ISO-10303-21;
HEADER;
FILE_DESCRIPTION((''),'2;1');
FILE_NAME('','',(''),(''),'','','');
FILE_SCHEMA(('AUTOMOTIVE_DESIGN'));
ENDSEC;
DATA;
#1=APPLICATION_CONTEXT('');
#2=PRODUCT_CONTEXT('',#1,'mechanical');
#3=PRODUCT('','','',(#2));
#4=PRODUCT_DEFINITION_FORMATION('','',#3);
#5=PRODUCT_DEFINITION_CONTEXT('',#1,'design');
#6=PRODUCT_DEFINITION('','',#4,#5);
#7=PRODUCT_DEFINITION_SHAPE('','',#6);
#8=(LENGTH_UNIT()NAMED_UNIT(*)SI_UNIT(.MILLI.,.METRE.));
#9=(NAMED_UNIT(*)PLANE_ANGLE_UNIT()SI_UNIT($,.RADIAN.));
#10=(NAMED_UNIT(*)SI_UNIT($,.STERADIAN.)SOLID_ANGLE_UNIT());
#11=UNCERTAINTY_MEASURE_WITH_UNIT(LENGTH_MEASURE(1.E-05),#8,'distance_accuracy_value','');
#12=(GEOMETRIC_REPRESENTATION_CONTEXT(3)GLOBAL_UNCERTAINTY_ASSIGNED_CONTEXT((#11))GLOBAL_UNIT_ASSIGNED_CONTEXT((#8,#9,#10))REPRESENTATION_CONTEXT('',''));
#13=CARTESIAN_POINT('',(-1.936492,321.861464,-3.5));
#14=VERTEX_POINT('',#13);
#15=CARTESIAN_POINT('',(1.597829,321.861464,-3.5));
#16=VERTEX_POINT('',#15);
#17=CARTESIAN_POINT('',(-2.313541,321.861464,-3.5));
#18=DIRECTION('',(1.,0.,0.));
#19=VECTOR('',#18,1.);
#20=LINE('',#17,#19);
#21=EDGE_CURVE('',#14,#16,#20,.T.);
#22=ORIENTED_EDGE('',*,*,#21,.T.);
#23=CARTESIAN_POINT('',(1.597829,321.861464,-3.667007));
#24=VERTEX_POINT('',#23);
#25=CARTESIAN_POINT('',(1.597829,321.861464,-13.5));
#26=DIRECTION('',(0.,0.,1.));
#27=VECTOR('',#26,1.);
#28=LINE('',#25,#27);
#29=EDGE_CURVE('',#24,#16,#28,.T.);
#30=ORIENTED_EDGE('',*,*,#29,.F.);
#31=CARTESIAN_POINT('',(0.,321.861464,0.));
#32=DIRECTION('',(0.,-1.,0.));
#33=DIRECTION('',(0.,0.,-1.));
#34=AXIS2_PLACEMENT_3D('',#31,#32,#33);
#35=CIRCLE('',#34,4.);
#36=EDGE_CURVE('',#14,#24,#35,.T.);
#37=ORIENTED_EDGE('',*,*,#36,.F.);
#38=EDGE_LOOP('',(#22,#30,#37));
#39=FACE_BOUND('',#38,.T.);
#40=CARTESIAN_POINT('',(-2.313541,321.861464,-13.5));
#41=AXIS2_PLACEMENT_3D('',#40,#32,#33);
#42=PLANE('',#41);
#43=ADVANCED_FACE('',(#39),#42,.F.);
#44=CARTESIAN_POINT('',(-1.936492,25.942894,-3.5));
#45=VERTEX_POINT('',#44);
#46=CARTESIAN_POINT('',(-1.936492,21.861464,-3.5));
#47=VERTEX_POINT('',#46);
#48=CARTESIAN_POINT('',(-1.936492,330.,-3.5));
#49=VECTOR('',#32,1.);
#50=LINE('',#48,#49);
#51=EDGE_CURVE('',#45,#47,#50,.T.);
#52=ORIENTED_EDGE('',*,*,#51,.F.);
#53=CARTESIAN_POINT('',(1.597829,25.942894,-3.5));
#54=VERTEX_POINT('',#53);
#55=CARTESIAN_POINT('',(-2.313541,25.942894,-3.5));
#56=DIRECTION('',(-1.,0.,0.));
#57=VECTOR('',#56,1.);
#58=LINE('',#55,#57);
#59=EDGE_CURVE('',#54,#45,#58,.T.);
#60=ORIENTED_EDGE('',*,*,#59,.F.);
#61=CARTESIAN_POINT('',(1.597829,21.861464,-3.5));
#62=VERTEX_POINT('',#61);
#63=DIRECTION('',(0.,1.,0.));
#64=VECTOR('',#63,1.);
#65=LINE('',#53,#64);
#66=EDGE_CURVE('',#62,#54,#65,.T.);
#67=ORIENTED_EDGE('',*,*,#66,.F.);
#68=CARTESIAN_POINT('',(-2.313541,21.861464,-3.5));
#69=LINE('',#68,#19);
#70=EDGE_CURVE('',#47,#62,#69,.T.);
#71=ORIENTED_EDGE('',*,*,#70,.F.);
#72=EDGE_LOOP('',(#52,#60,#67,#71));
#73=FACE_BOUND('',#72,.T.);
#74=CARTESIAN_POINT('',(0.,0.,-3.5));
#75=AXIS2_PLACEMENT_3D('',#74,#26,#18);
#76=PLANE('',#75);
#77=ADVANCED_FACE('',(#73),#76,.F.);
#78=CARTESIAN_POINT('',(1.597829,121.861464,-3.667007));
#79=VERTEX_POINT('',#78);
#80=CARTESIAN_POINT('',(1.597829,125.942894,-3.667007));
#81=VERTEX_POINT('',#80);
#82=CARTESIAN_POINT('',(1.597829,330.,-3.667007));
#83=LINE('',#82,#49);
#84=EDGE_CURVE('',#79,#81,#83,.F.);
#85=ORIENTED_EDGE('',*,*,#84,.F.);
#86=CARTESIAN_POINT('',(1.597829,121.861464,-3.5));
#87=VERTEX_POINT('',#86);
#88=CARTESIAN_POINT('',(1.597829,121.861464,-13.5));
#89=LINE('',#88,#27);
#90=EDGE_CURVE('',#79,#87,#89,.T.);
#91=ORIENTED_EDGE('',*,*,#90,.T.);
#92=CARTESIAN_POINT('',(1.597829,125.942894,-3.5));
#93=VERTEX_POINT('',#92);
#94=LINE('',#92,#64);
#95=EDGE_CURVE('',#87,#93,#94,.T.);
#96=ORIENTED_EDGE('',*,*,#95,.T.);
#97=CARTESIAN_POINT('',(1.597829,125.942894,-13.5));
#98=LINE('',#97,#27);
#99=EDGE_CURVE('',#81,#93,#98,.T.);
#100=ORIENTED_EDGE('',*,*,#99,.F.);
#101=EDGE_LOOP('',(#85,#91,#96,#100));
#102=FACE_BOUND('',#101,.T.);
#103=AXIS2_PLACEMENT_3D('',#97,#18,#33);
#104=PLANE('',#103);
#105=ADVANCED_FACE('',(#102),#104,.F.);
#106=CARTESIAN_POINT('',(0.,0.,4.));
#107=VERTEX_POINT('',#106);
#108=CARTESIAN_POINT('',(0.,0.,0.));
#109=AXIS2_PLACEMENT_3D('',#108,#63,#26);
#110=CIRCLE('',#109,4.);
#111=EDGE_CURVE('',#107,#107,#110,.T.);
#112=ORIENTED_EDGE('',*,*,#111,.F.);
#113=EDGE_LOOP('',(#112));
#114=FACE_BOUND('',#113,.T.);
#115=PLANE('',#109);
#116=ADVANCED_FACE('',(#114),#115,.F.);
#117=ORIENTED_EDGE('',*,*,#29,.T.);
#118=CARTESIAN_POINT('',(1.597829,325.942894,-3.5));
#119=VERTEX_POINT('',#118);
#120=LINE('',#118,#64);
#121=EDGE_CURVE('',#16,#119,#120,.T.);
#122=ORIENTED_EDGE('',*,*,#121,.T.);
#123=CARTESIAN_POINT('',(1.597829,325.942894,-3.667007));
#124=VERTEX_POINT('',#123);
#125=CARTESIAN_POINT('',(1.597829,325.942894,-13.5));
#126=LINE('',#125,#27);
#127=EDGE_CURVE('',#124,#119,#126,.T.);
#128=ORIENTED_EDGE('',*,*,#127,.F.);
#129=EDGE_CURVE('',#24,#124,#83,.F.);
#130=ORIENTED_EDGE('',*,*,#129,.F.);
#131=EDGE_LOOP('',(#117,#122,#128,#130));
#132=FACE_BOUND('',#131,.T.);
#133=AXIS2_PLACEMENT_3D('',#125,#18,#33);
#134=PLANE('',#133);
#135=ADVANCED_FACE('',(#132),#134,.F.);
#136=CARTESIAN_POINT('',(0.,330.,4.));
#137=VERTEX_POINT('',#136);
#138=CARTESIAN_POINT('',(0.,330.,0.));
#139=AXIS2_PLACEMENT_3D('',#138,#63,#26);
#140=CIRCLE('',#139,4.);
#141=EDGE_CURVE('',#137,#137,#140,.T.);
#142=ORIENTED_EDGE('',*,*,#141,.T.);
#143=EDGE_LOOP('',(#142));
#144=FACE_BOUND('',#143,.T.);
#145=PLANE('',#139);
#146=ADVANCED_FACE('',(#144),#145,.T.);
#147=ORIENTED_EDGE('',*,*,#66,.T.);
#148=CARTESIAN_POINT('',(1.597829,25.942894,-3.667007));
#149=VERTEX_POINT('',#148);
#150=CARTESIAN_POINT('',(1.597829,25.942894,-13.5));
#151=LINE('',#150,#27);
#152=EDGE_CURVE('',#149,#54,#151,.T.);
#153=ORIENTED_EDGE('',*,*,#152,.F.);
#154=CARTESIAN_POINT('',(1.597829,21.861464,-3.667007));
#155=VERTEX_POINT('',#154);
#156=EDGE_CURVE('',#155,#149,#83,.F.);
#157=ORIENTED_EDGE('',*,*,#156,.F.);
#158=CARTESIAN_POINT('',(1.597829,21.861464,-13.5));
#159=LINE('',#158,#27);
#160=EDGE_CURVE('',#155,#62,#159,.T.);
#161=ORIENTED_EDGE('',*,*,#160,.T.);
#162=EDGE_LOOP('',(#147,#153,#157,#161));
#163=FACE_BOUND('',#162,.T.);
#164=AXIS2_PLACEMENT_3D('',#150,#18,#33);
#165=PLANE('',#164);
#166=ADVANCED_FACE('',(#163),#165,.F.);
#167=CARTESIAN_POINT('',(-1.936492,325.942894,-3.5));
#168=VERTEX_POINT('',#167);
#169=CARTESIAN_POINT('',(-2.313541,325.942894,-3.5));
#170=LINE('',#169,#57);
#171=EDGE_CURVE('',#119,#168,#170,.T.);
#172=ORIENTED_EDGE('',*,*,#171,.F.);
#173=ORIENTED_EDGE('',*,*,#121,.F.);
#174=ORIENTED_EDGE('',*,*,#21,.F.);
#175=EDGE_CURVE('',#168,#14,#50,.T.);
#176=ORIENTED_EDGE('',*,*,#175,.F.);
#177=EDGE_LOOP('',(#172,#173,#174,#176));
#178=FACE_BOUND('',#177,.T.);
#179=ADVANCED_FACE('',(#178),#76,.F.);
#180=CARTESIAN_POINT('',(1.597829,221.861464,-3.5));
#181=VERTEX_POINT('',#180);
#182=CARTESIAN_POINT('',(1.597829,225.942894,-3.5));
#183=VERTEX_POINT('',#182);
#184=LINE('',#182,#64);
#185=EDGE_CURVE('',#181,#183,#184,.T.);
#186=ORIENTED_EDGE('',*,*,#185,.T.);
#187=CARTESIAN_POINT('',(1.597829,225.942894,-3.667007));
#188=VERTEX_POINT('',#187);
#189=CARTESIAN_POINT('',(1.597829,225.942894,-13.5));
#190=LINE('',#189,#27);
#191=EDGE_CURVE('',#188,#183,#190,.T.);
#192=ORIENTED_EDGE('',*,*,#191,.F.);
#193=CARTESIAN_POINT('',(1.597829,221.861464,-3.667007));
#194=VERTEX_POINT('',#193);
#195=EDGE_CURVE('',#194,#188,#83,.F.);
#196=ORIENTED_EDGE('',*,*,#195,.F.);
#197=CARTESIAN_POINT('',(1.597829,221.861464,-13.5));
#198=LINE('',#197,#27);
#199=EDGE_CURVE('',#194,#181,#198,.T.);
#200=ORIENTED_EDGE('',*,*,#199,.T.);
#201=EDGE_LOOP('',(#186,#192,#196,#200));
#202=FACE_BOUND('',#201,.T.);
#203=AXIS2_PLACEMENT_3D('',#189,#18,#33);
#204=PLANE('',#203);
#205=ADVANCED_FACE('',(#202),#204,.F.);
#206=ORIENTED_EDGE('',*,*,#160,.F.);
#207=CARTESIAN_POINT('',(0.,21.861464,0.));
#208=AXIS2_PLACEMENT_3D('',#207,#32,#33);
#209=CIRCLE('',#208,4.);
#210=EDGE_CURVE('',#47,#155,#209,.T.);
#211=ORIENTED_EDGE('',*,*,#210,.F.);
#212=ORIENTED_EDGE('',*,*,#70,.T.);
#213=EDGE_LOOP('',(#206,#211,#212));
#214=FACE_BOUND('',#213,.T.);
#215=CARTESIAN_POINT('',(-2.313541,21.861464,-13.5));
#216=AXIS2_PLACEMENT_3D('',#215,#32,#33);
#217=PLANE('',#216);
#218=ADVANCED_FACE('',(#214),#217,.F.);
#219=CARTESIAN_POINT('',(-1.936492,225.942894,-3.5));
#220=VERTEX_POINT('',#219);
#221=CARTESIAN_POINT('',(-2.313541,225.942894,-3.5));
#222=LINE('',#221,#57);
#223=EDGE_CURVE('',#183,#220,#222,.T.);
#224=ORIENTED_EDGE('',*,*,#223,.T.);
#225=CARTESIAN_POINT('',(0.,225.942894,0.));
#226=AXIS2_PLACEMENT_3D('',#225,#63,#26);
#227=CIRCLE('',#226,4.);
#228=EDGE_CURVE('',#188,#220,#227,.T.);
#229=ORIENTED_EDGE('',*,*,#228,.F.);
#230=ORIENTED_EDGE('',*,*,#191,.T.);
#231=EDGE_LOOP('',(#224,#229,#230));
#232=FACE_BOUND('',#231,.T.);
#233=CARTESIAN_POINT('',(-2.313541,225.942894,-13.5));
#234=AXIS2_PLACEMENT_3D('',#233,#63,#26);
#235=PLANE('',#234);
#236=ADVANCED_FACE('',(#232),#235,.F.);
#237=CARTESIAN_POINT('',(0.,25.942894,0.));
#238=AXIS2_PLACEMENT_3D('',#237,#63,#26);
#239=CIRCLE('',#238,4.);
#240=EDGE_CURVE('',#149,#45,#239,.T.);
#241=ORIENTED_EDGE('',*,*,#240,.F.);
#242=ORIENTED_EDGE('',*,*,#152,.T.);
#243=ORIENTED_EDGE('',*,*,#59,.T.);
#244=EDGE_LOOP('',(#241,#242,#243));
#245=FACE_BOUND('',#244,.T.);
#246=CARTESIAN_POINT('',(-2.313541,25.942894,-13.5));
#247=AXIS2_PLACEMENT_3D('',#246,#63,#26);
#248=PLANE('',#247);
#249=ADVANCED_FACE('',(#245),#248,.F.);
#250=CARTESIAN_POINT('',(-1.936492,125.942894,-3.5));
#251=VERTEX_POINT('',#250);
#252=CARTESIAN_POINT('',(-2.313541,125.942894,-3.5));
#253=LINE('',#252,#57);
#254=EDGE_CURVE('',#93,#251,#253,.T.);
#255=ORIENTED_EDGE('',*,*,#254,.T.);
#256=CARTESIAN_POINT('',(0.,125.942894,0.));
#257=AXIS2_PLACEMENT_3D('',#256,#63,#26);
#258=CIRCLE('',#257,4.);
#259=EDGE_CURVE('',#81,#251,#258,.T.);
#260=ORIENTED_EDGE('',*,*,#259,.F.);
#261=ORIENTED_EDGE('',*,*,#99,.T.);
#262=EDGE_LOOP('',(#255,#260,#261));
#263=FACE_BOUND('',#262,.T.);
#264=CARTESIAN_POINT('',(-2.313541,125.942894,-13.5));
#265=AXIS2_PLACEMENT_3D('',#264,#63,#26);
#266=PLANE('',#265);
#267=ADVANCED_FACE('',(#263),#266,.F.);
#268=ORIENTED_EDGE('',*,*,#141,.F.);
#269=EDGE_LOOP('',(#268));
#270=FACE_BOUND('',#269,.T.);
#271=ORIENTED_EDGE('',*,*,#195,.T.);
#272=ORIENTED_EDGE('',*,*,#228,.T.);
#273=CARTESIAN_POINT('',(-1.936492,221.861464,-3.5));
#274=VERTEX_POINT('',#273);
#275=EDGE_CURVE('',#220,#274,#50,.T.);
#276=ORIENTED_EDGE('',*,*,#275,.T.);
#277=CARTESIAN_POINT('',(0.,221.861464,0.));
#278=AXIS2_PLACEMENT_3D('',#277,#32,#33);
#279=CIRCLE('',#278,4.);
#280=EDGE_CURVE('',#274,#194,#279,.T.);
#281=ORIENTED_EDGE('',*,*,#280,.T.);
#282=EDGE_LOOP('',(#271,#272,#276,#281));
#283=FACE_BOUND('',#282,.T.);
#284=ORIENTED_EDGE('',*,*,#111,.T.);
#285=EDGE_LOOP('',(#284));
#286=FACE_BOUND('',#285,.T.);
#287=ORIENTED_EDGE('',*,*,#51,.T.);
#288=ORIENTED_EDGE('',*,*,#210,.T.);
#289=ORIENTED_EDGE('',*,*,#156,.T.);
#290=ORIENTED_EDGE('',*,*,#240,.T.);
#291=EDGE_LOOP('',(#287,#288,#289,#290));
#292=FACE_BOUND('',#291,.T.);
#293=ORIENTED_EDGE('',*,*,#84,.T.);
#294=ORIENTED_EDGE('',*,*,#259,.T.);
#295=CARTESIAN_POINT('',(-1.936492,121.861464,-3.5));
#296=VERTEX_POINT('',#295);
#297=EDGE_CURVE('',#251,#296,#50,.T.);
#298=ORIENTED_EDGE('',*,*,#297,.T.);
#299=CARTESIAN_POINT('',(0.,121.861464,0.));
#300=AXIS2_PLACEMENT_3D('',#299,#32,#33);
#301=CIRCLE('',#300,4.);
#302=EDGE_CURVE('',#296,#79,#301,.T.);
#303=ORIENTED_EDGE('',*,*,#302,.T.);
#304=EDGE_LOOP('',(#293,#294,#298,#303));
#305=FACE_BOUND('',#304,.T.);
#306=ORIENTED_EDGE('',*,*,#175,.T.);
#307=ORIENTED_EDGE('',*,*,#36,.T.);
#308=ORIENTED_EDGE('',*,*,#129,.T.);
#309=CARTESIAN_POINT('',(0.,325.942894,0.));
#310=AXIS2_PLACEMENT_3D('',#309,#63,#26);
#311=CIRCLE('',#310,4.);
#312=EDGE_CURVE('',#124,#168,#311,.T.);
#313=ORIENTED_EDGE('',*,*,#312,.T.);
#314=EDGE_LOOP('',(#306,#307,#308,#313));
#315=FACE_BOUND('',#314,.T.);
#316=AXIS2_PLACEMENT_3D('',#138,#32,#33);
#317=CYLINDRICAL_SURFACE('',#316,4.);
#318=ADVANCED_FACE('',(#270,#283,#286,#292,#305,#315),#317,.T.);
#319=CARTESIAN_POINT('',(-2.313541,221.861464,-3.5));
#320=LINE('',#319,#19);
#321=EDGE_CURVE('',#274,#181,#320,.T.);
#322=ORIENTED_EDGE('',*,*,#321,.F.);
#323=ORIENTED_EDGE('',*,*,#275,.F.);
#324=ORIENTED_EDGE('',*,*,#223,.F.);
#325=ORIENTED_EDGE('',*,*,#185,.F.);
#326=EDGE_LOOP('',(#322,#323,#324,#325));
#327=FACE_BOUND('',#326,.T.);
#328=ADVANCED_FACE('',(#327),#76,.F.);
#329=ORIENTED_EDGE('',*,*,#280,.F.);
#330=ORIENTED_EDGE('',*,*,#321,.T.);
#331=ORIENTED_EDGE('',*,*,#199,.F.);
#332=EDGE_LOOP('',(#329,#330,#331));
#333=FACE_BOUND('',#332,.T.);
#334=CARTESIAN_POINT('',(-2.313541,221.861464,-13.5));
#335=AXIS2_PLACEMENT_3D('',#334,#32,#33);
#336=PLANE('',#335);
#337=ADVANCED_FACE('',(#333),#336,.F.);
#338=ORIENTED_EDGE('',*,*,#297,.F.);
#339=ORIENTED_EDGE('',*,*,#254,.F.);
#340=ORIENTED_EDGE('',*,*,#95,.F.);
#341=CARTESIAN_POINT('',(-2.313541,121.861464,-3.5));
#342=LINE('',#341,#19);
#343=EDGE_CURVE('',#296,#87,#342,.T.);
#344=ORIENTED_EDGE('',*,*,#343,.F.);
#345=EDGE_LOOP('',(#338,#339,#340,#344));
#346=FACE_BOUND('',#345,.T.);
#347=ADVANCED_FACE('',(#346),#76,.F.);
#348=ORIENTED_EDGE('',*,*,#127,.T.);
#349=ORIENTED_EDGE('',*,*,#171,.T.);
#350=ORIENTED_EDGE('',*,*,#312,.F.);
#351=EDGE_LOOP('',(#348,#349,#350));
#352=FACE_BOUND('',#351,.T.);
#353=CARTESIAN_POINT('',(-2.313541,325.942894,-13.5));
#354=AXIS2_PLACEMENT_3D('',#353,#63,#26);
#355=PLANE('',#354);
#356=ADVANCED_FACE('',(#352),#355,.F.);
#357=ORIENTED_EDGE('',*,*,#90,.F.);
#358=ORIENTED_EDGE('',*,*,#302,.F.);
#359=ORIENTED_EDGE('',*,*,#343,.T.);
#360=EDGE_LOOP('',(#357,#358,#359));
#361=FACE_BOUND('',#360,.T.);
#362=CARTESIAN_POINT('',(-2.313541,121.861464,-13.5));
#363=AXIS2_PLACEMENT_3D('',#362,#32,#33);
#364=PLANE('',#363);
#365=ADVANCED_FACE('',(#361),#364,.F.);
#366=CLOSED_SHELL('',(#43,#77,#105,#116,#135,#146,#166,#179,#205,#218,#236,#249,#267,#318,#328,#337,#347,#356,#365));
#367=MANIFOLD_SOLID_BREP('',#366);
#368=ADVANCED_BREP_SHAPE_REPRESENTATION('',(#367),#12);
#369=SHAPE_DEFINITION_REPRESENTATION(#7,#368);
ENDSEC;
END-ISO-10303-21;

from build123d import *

# Parameters (mm, degrees)
SKETCH1_R           = 4
BOSS_EXTRUDE1_DEPTH = 330
CUT_EXTRUDE1_START  = -3.5
SKETCH2_W           = 3.911370479
SKETCH2_H           = 4.081430066
CUT_EXTRUDE1_DEPTH  = 10


with BuildPart() as part:
    # Sketch1 → Boss-Extrude1 (new body)
    with BuildSketch(Plane(origin=(0, 0, 0), x_dir=(1, 0, 0), z_dir=(0, 1, 0))):
        Circle(SKETCH1_R)
    extrude(amount=BOSS_EXTRUDE1_DEPTH)

    # Sketch2 → Cut-Extrude1 (cut)
    with BuildSketch(Plane.XY.offset(CUT_EXTRUDE1_START)):
        with Locations((-0.357855864, 223.902178758)):
            Rectangle(SKETCH2_W, SKETCH2_H)
        with Locations((-0.357855864, 323.902178758)):
            Rectangle(SKETCH2_W, SKETCH2_H)
        with Locations((-0.357855864, 123.902178758)):
            Rectangle(SKETCH2_W, SKETCH2_H)
        with Locations((-0.357855864, 23.902178758)):
            Rectangle(SKETCH2_W, SKETCH2_H)
    extrude(amount=-CUT_EXTRUDE1_DEPTH, mode=Mode.SUBTRACT)


solid = part.part
